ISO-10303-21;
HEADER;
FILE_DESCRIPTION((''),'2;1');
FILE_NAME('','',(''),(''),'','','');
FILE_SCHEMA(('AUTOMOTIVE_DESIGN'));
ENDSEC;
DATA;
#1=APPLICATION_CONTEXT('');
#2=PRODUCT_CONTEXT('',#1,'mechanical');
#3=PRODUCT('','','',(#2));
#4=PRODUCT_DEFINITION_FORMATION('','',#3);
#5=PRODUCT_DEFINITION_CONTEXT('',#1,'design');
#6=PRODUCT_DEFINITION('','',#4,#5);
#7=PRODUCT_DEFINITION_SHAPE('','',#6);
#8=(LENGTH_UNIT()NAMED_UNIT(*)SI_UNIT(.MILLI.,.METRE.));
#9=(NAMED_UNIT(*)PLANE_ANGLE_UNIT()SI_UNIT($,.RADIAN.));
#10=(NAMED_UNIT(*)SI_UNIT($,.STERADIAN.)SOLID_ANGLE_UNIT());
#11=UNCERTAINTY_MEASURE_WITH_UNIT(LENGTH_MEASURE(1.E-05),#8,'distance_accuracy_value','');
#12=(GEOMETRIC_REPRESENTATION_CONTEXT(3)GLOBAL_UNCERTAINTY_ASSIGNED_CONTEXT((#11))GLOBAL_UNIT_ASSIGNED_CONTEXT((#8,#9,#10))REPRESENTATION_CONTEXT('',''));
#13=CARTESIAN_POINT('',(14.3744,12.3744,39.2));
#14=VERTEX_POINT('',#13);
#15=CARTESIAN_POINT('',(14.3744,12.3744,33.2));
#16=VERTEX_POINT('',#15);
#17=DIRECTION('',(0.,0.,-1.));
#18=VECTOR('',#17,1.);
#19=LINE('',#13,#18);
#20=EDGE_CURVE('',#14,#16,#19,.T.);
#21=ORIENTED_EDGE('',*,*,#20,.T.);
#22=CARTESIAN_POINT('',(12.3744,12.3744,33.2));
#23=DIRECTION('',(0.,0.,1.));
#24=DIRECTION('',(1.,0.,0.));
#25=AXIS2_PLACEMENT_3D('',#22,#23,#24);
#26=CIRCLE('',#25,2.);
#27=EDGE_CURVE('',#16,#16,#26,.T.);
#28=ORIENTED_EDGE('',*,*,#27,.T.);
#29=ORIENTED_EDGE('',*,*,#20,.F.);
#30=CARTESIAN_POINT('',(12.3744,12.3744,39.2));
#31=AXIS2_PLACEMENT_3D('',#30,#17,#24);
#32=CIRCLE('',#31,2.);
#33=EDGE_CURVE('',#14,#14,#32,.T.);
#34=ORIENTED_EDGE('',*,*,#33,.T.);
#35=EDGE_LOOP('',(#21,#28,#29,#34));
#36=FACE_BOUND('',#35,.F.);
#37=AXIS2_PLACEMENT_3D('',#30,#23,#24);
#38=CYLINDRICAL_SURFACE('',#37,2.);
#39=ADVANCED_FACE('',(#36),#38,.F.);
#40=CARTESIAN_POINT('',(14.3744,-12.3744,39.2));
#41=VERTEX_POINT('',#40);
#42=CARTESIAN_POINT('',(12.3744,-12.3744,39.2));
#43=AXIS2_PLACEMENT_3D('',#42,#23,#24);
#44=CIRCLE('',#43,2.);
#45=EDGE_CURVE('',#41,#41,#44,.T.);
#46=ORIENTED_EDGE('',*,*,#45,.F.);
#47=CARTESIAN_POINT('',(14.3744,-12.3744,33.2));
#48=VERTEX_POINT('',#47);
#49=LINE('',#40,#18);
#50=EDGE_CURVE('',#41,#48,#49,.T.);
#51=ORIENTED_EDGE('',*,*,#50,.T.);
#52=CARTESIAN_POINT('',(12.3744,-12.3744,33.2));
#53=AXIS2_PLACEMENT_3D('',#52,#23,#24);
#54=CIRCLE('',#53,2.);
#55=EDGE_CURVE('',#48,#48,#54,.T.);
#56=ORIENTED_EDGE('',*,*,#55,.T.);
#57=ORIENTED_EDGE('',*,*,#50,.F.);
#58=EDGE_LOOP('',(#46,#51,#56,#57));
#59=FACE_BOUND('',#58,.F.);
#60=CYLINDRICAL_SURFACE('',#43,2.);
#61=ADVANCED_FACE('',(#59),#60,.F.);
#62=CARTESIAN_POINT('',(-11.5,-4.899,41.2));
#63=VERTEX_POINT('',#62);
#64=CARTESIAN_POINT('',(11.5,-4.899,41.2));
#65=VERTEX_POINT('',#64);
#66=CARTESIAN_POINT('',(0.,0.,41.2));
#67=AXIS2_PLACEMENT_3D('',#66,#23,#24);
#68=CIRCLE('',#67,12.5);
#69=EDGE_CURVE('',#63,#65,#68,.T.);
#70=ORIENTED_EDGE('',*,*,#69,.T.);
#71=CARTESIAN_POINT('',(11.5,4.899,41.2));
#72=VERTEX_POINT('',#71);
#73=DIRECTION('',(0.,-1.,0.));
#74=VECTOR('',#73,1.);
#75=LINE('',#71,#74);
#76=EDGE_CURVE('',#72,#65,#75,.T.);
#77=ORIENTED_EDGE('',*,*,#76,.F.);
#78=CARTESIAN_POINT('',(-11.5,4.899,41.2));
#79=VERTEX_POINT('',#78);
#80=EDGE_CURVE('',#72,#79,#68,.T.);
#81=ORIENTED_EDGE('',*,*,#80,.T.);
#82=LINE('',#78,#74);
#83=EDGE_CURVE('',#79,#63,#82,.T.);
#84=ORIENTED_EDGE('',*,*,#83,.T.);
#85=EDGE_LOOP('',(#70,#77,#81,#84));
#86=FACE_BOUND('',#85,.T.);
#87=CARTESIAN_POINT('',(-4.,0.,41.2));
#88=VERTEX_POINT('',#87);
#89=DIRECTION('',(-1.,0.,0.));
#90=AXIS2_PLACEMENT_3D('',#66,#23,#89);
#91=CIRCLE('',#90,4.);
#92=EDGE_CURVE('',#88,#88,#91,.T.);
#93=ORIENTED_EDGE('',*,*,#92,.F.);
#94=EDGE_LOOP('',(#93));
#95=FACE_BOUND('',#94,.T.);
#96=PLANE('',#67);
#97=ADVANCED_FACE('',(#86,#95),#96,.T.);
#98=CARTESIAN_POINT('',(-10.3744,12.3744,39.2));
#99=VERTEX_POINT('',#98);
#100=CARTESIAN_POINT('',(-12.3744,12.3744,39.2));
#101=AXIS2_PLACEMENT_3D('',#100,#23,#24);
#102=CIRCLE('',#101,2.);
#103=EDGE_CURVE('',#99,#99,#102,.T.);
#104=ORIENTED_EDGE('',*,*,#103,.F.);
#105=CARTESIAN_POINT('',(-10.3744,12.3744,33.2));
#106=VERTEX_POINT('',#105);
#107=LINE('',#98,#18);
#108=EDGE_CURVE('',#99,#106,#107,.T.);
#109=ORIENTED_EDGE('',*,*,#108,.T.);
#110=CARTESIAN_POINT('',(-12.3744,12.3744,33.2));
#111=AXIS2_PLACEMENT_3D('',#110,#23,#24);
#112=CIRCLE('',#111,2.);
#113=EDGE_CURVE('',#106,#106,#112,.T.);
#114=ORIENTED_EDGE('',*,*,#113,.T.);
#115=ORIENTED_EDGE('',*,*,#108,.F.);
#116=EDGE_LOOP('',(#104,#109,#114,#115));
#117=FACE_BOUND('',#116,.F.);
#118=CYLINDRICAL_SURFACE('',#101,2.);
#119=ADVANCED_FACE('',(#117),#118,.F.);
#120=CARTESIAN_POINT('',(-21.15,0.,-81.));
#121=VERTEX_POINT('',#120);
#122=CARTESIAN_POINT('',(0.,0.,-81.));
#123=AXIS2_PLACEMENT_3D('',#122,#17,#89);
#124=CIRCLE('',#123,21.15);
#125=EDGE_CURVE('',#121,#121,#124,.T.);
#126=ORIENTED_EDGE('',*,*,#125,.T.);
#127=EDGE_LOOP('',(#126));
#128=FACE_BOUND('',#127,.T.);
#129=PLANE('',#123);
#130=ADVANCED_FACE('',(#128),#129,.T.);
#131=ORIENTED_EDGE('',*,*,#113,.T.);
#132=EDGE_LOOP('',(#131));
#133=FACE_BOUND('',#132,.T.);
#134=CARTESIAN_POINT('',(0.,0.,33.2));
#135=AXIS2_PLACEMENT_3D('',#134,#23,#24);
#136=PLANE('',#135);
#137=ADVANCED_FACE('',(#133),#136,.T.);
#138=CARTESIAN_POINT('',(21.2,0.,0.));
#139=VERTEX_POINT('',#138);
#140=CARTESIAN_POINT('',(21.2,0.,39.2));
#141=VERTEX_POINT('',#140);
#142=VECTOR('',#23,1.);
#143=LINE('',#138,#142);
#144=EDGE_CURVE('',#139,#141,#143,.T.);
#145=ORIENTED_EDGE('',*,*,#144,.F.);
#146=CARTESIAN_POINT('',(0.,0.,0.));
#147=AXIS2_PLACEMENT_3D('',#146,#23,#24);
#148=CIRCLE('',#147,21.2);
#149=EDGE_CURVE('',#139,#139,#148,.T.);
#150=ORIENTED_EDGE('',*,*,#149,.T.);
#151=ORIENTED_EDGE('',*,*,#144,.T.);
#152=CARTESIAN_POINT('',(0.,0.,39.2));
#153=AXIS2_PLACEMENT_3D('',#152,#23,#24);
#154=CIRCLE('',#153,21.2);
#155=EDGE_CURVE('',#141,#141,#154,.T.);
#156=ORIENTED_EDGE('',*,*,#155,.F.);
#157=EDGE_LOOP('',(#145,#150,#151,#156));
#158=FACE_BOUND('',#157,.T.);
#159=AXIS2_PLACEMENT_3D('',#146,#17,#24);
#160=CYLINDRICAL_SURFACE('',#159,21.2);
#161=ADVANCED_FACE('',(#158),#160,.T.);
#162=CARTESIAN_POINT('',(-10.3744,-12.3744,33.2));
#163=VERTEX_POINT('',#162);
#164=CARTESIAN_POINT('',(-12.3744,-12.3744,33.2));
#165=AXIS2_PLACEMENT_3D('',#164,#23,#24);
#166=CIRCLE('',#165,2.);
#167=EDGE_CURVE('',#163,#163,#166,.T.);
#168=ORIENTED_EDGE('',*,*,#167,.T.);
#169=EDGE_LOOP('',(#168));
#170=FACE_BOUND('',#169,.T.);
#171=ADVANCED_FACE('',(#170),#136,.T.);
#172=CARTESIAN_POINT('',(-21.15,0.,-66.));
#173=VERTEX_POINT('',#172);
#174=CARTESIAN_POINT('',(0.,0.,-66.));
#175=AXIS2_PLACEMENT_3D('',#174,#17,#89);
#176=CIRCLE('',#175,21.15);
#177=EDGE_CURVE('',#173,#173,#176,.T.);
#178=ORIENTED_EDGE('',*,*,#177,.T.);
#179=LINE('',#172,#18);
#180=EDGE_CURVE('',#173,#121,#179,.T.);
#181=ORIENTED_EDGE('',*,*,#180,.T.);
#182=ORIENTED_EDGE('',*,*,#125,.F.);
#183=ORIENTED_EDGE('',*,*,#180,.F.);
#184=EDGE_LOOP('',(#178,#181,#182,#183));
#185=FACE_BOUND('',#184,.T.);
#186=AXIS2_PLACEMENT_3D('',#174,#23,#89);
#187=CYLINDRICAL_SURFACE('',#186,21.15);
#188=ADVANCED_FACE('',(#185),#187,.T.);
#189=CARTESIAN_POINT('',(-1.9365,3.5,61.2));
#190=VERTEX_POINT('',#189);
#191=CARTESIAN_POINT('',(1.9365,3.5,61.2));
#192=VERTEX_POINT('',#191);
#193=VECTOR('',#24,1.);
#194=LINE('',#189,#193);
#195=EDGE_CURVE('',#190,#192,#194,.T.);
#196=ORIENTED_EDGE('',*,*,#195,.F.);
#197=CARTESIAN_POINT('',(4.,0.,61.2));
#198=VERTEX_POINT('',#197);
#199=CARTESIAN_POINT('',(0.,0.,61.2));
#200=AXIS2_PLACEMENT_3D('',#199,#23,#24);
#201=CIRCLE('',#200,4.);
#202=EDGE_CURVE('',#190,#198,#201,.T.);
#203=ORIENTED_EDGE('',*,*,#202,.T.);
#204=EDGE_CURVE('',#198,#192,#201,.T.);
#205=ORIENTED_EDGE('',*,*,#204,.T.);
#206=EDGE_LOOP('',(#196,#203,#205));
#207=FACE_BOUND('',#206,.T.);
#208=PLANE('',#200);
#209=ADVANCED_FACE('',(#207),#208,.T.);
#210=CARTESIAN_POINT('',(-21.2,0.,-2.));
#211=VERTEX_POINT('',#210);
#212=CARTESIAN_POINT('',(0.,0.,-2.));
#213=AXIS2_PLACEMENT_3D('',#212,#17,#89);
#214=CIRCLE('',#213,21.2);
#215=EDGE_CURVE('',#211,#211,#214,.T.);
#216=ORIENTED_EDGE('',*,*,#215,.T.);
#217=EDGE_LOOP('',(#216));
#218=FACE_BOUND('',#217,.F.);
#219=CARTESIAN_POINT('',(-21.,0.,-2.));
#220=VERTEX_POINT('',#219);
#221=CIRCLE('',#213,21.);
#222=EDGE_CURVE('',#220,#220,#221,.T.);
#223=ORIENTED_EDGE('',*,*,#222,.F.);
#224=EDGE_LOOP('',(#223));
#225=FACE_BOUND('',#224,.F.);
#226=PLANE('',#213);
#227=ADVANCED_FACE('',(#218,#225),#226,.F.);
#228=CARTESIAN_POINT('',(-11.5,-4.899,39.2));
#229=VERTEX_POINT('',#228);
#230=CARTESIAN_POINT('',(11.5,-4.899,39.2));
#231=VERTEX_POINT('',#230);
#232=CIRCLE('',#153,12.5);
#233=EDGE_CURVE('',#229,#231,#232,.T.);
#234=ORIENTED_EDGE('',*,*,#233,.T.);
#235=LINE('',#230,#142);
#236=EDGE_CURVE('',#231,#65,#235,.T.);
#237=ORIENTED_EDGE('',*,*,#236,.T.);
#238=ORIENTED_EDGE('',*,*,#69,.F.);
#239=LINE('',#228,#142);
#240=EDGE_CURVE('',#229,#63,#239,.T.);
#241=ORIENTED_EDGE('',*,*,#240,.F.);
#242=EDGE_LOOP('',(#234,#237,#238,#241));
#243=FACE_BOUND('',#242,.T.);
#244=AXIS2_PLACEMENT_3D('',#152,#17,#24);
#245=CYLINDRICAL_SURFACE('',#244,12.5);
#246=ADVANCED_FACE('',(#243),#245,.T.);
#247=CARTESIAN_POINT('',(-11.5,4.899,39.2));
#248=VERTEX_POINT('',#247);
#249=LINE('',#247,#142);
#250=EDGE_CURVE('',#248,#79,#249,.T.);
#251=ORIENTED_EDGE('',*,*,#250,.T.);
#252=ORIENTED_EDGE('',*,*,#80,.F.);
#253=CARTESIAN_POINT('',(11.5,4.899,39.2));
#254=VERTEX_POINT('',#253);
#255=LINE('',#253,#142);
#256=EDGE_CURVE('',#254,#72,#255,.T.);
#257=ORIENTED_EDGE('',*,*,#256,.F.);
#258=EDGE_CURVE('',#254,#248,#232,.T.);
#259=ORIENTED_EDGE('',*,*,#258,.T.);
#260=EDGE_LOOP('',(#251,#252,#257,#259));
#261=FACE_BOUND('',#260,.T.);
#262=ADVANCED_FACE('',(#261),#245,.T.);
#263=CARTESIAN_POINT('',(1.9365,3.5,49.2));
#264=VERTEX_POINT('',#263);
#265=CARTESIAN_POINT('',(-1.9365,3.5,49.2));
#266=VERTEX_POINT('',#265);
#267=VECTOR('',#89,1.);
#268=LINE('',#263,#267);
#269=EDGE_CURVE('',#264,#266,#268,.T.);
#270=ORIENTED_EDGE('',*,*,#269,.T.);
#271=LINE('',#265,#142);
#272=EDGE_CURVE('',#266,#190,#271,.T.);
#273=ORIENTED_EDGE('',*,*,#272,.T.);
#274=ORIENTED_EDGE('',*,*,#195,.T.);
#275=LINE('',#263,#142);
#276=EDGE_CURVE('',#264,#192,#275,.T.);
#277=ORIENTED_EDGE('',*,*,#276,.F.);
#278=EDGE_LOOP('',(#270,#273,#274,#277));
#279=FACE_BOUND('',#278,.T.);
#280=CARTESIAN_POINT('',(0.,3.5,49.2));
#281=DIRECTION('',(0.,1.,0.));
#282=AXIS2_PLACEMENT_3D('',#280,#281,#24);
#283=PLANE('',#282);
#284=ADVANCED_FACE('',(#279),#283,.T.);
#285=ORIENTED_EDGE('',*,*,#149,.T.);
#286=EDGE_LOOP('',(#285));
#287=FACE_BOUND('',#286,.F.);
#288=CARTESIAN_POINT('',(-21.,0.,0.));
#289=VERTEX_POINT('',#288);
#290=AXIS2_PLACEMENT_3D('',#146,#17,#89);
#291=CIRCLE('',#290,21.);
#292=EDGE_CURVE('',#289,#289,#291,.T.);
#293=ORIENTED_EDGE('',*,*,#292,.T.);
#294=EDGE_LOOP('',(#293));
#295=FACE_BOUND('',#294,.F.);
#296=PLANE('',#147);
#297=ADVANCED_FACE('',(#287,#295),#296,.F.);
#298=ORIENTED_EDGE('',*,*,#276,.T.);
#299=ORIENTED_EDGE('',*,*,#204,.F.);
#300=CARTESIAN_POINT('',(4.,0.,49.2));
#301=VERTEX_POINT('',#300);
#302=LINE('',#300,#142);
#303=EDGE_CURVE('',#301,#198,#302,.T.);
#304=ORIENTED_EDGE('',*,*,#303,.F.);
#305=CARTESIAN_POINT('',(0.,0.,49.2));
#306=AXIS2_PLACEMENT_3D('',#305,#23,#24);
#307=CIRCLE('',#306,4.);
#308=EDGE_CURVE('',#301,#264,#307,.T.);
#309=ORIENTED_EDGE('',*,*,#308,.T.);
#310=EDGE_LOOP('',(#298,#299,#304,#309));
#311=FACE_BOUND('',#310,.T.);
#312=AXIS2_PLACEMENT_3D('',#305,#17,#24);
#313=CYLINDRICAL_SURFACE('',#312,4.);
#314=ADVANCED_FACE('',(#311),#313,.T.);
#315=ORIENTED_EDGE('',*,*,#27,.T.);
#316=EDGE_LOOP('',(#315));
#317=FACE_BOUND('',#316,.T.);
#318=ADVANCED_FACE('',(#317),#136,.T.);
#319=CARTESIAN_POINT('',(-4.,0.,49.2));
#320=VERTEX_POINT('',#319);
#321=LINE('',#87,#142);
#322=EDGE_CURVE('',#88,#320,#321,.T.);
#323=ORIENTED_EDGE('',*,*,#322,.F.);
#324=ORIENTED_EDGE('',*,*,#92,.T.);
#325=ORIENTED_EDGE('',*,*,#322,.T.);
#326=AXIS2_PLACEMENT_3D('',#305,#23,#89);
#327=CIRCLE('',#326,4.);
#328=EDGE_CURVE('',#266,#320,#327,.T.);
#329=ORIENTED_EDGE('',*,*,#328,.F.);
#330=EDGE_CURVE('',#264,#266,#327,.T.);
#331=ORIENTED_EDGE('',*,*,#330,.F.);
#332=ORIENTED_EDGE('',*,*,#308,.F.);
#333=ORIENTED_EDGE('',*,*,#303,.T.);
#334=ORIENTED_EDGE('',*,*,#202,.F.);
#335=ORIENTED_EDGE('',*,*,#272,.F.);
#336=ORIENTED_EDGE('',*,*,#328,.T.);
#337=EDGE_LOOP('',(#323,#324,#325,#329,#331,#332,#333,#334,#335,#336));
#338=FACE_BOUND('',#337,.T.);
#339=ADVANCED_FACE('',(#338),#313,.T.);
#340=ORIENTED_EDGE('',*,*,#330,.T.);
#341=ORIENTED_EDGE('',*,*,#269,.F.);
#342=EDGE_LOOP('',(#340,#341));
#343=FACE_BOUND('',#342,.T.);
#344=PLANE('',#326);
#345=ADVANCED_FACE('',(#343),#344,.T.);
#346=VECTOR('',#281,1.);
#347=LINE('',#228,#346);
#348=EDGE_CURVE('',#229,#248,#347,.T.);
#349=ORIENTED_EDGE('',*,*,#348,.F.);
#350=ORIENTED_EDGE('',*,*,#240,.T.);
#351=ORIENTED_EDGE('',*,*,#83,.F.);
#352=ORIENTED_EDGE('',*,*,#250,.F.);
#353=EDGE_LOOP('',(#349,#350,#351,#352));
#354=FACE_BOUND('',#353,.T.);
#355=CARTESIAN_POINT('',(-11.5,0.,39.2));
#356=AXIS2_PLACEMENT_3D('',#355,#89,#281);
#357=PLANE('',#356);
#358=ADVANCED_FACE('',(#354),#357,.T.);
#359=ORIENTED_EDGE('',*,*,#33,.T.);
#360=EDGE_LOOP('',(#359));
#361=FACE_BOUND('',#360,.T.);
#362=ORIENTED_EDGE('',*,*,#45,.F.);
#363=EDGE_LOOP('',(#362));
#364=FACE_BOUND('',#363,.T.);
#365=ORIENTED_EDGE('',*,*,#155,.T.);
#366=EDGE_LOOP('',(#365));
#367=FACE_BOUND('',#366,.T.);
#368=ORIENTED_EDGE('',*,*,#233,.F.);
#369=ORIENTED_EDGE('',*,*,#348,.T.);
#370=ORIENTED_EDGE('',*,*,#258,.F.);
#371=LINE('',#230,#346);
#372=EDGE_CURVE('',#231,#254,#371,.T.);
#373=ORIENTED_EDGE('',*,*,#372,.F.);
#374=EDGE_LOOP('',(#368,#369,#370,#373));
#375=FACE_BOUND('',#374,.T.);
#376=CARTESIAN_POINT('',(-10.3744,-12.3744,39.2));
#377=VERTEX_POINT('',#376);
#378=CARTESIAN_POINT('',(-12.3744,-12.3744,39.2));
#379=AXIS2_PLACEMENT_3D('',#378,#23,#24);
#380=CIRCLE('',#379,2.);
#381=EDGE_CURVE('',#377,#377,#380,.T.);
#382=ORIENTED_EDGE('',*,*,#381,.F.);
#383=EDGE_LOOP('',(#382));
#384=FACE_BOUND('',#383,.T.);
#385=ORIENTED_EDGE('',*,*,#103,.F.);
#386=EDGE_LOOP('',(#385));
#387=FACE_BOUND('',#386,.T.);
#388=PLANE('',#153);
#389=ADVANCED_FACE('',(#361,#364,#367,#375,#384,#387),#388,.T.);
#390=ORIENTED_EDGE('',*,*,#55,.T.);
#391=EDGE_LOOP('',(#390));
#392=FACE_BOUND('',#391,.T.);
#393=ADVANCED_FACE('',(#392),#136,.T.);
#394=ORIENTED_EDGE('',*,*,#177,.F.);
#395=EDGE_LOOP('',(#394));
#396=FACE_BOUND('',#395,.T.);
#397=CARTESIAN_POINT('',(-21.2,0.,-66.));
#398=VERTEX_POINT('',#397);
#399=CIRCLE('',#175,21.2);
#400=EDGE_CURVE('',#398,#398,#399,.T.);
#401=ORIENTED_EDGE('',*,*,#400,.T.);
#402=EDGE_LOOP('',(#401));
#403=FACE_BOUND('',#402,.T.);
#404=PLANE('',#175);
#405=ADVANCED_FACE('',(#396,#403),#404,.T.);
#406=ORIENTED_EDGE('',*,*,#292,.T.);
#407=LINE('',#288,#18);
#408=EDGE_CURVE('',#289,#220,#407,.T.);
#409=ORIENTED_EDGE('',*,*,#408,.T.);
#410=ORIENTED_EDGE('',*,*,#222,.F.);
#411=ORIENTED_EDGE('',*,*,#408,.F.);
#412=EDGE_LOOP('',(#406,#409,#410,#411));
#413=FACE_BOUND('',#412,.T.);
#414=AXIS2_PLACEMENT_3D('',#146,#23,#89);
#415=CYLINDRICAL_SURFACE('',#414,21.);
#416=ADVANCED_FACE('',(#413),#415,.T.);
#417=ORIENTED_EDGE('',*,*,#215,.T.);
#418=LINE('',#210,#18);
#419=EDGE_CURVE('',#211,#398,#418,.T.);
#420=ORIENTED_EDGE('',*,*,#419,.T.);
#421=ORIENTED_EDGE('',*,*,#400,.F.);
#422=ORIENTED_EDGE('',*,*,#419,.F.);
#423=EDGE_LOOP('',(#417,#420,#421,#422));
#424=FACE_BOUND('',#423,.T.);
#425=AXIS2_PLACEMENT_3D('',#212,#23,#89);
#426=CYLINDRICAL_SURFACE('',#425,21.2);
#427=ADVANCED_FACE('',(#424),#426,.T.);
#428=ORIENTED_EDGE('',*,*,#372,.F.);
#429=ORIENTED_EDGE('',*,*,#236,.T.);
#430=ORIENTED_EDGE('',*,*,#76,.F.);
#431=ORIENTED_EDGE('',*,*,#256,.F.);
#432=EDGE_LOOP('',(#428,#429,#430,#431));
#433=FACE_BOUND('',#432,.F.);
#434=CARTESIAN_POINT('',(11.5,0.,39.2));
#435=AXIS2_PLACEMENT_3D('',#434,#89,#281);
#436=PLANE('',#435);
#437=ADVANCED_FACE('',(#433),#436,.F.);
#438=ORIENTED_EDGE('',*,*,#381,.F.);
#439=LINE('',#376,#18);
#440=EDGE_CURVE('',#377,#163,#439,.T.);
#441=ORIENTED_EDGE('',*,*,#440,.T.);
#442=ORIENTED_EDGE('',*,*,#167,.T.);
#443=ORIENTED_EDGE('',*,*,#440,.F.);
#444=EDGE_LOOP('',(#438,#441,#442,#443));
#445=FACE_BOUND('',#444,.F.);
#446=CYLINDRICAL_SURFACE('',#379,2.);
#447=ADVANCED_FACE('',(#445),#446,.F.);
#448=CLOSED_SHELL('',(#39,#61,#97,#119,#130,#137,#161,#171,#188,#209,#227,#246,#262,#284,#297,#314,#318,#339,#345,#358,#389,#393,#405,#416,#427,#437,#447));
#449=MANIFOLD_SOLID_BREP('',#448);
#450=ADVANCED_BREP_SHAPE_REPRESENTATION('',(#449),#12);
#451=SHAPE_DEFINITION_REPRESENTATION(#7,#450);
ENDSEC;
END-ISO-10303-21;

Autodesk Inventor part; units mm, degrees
ref_plane "YZ Plane" through (0, 0, 0) normal (1, 0, 0) x (0, 1, 0)
ref_plane "XZ Plane" through (0, 0, 0) normal (0, 1, 0) x (-1, 0, 0)
ref_plane "XY Plane" through (0, 0, 0) normal (0, 0, 1) x (1, 0, 0)
sketch "스케치1" plane through (0, 0, 0) normal (0, 0, 1) x (1, 0, 0)
  circle A0 centre (0, 0) radius 21.2
  dimension "d0" = 42.4
extrude "돌출1" add sketch "스케치1" along normal blind 39.2
sketch "스케치2" plane through (0, 0, 0) normal (0, 0, -1) x (-1, 0, 0)
  circle A0 centre (0, 0) radius 21
  dimension "d5" = 42
extrude "돌출2" add sketch "스케치2" along normal blind 2
sketch "스케치3" plane through (0, 0, -2) normal (0, 0, -1) x (-1, 0, 0)
  circle A0 centre (0, 0) radius 21.2
extrude "돌출3" add sketch "스케치3" along normal blind 64
sketch "스케치4" plane through (0, 0, -66) normal (0, 0, -1) x (-1, 0, 0)
  circle A0 centre (0, 0) radius 21.15
  dimension "d19" = 42.3
extrude "돌출4" add sketch "스케치4" along normal blind 15
sketch "스케치5" plane through (0, 0, 39.2) normal (0, 0, 1) x (1, 0, 0)
  circle A0 centre (0, 0) radius 12.5
  line L0 (0, 0) -> (11.5, 0)
  line L1 (11.5, 0) -> (11.5, 4.899)
  line L2 (11.5, 0) -> (11.5, -4.899)
  line L3 (0, 0) -> (-11.5, 0)
  line L4 (-11.5, 0) -> (-11.5, 4.899)
  line L5 (-11.5, 0) -> (-11.5, -4.899)
  dimension "d10" = 25
  dimension "d20" = 11.5
  dimension "d21" = 11.5
extrude "돌출5" add sketch "스케치5" along normal blind 2 contours L1 L0 L3 L4 A0 | A0 L5 L3 L0 L2
sketch "스케치6" plane through (0, 0, 41.2) normal (0, 0, 1) x (-1, 0, 0)
  circle A0 centre (0, 0) radius 4
  dimension "d13" = 8
extrude "돌출6" add sketch "스케치6" along normal blind 8
sketch "스케치7" plane through (0, 0, 49.2) normal (0, 0, 1) x (1, 0, 0)
  line L0 (0, 0) -> (0, 3.5)
  line L1 (0, 3.5) -> (1.9365, 3.5)
  circle A0 centre (0, 0) radius 4 projected
  line L2 (0, 3.5) -> (-1.9365, 3.5)
  arc A1 (-1.9365, 3.5) -> (1.9365, 3.5) centre (0, 0) ccw
  dimension "d16" = 3.5
extrude "돌출7" add sketch "스케치7" along normal blind 12 contours L1 A0 L2 picked at (-0.0999, -1.4777)
sketch "스케치8" plane through (0, 0, 39.2) normal (0, 0, 1) x (1, 0, 0)
  arc A0 (11.5, 4.899) -> (-11.5, 4.899) centre (0, 0) ccw projected
  line L0 (11.5, 4.899) -> (11.5, -4.899) projected
  arc A1 (-11.5, -4.899) -> (11.5, -4.899) centre (0, 0) ccw projected
  line L1 (-11.5, -4.899) -> (-11.5, 4.899) projected
  circle A2 centre (0, 0) radius 21.2 projected
  line L2 (0, 0) -> (12.3744, 12.3744)
  line L3 (0, 0) -> (17.5, 0) construction
  circle A3 centre (12.3744, 12.3744) radius 2
  circle A4 centre (-12.3744, 12.3744) radius 2
  circle A5 centre (-12.3744, -12.3744) radius 2
  circle A6 centre (12.3744, -12.3744) radius 2
  dimension "d22" = 17.5
  dimension "d23" = 45
  dimension "d24" = 4
  dimension "d27" = 360
extrude "돌출8" cut sketch "스케치8" against normal blind 6 contours A3 | A4 | A5 | A6
thread "스레드1" size "M4x0.7" class "6H" standard "ANSI Metric M Profile" full length
thread "스레드2" size "M4x0.7" class "6H" standard "ANSI Metric M Profile" full length
thread "스레드3" size "M4x0.7" class "6H" standard "ANSI Metric M Profile" full length
thread "스레드4" size "M4x0.7" class "6H" standard "ANSI Metric M Profile" full length
properties part number "IG-42GM_motor"
